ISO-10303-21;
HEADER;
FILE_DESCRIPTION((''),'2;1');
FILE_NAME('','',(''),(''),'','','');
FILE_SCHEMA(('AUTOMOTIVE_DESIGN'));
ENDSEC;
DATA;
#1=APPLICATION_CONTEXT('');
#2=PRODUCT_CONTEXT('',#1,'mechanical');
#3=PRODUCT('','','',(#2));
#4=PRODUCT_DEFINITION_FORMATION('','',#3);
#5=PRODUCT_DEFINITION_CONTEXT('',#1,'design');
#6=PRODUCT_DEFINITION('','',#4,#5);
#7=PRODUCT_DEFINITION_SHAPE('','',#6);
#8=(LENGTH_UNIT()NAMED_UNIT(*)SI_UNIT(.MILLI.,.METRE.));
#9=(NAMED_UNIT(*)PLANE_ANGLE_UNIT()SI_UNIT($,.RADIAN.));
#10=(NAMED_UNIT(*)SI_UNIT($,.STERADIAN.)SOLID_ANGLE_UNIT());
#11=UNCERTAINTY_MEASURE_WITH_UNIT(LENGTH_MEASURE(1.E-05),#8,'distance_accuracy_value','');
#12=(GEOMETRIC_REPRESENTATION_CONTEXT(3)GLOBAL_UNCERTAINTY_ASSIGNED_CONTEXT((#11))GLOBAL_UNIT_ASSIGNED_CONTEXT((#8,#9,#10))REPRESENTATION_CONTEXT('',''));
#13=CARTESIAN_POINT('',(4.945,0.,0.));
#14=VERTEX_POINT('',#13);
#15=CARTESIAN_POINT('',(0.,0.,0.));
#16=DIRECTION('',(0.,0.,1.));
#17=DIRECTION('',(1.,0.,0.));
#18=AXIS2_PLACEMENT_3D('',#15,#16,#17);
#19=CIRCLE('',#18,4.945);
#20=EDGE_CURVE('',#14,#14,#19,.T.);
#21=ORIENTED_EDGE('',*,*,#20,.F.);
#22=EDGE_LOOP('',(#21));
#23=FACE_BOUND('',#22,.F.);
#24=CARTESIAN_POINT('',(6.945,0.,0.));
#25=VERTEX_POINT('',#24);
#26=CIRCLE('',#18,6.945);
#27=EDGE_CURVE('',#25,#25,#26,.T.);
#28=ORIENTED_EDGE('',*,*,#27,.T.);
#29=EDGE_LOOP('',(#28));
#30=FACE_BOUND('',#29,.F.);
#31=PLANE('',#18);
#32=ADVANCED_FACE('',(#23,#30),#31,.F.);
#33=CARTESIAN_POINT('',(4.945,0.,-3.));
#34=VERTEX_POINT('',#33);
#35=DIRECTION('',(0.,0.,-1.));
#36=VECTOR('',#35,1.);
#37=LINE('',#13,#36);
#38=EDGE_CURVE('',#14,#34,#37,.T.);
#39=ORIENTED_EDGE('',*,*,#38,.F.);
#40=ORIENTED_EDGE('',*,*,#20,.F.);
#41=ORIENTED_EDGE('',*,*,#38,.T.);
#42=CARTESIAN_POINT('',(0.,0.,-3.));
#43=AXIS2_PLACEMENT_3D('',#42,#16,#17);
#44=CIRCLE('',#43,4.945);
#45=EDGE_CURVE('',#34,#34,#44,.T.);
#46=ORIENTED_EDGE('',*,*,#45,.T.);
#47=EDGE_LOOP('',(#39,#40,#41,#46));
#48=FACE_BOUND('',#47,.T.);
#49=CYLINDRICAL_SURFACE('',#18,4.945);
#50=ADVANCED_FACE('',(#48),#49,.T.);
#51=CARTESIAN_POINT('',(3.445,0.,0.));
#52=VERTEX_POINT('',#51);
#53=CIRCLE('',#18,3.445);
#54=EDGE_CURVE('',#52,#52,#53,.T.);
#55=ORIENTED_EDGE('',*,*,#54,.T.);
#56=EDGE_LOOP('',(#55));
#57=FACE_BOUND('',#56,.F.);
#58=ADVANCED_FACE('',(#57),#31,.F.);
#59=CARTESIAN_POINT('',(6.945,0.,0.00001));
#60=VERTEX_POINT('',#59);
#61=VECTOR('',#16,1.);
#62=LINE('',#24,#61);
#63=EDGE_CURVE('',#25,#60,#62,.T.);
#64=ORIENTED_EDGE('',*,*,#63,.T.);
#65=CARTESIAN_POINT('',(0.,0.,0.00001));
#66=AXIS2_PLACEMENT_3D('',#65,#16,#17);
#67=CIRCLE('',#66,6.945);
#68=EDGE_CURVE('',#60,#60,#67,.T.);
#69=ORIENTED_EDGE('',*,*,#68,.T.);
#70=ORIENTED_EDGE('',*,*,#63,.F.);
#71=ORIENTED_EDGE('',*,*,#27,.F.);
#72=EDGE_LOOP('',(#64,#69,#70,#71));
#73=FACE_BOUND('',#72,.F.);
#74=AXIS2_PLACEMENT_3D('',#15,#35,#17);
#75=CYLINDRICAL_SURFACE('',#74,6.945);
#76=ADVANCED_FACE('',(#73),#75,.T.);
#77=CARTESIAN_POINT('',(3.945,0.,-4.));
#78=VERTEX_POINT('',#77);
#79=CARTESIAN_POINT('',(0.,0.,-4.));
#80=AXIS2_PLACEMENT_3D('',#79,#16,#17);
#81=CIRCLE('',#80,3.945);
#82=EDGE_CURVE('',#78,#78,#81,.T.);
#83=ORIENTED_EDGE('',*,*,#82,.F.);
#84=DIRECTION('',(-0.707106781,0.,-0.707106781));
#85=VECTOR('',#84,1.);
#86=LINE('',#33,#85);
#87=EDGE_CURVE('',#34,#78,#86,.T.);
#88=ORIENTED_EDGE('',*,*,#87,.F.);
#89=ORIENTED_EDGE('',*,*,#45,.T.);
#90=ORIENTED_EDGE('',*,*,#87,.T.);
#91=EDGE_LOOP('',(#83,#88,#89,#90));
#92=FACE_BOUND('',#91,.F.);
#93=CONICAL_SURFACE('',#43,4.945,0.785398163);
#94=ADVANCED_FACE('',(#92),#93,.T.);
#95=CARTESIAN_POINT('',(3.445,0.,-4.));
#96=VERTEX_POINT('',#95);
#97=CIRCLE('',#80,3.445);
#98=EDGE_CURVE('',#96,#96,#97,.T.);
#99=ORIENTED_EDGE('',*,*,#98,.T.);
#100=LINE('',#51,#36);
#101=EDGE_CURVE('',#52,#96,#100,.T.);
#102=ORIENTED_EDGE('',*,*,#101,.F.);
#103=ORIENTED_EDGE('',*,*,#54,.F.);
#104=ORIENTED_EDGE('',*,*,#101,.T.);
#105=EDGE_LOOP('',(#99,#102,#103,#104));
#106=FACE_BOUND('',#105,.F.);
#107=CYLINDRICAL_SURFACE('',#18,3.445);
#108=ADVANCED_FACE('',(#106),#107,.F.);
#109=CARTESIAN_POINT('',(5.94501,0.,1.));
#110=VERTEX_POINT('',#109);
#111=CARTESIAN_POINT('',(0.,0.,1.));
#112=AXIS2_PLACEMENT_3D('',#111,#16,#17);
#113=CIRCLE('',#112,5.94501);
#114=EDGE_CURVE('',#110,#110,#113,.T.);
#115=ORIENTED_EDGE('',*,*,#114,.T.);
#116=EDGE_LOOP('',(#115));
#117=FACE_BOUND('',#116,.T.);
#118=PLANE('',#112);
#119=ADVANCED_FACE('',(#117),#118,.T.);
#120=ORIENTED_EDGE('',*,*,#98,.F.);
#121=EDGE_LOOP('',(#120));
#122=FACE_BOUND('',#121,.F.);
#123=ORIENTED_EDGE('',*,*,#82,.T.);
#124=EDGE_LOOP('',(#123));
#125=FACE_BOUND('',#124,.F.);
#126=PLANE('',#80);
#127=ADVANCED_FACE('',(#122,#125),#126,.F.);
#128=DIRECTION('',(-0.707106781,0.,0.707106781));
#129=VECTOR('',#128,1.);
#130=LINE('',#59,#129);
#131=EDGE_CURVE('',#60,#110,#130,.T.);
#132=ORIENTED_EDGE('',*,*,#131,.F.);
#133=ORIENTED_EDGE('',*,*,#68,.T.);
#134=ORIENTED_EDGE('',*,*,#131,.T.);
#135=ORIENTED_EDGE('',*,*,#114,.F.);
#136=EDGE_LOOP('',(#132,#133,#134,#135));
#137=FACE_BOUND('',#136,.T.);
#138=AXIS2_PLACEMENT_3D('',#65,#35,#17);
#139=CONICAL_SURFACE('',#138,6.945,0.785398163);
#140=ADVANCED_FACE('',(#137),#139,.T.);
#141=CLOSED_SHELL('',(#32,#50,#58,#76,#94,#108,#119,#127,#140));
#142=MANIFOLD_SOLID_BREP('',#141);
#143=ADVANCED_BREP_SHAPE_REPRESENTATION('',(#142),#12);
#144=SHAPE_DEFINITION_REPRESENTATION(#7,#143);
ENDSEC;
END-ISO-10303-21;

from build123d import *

# Parameters (mm, degrees)
F0_R        = 4.945
F0_R_2      = 3.445
F1_DEPTH    = 4
F0_R_3      = 6.945
F1_FACE_R   = 4.945
F1_FACE_R_2 = 3.445
F2_DEPTH    = 1
F3_SIZE     = 0.99999
F4_SIZE2    = 1
F4_SIZE     = 1


# Not quite as in the source:
# - a fillet or chamfer is up to 0.001 mm smaller than in the source, because OpenCascade refuses the exact size


with BuildPart() as f1:
    # F0 (on Top) → F1 (new body)
    with BuildSketch(Plane.XY):
        Circle(F0_R)
        Circle(F0_R_2, mode=Mode.SUBTRACT)
    extrude(amount=-F1_DEPTH)

    # F0 (on Top) + F1_face (on face) → F2 (join)
    with BuildSketch(Plane.XY):
        Circle(F0_R_3)
        Circle(F0_R, mode=Mode.SUBTRACT)
        Circle(F0_R_2)
    with BuildSketch(Plane.XY):
        Circle(F1_FACE_R)
        Circle(F1_FACE_R_2, mode=Mode.SUBTRACT)
    extrude(amount=F2_DEPTH)

    # F3 (size 1 in the source; OpenCascade refuses exactly that, so slightly less here)
    f3_edges = [f1.edges().sort_by_distance(p)[0] for p in [
        (-6.945, 0, 1),
    ]]
    chamfer(f3_edges, length=F3_SIZE)

    # F4
    f4_edges = [f1.edges().sort_by_distance(p)[0] for p in [
        (-4.945, 0, -4),
    ]]
    chamfer(f4_edges, length=F4_SIZE, length2=F4_SIZE2)


solid = f1.part
